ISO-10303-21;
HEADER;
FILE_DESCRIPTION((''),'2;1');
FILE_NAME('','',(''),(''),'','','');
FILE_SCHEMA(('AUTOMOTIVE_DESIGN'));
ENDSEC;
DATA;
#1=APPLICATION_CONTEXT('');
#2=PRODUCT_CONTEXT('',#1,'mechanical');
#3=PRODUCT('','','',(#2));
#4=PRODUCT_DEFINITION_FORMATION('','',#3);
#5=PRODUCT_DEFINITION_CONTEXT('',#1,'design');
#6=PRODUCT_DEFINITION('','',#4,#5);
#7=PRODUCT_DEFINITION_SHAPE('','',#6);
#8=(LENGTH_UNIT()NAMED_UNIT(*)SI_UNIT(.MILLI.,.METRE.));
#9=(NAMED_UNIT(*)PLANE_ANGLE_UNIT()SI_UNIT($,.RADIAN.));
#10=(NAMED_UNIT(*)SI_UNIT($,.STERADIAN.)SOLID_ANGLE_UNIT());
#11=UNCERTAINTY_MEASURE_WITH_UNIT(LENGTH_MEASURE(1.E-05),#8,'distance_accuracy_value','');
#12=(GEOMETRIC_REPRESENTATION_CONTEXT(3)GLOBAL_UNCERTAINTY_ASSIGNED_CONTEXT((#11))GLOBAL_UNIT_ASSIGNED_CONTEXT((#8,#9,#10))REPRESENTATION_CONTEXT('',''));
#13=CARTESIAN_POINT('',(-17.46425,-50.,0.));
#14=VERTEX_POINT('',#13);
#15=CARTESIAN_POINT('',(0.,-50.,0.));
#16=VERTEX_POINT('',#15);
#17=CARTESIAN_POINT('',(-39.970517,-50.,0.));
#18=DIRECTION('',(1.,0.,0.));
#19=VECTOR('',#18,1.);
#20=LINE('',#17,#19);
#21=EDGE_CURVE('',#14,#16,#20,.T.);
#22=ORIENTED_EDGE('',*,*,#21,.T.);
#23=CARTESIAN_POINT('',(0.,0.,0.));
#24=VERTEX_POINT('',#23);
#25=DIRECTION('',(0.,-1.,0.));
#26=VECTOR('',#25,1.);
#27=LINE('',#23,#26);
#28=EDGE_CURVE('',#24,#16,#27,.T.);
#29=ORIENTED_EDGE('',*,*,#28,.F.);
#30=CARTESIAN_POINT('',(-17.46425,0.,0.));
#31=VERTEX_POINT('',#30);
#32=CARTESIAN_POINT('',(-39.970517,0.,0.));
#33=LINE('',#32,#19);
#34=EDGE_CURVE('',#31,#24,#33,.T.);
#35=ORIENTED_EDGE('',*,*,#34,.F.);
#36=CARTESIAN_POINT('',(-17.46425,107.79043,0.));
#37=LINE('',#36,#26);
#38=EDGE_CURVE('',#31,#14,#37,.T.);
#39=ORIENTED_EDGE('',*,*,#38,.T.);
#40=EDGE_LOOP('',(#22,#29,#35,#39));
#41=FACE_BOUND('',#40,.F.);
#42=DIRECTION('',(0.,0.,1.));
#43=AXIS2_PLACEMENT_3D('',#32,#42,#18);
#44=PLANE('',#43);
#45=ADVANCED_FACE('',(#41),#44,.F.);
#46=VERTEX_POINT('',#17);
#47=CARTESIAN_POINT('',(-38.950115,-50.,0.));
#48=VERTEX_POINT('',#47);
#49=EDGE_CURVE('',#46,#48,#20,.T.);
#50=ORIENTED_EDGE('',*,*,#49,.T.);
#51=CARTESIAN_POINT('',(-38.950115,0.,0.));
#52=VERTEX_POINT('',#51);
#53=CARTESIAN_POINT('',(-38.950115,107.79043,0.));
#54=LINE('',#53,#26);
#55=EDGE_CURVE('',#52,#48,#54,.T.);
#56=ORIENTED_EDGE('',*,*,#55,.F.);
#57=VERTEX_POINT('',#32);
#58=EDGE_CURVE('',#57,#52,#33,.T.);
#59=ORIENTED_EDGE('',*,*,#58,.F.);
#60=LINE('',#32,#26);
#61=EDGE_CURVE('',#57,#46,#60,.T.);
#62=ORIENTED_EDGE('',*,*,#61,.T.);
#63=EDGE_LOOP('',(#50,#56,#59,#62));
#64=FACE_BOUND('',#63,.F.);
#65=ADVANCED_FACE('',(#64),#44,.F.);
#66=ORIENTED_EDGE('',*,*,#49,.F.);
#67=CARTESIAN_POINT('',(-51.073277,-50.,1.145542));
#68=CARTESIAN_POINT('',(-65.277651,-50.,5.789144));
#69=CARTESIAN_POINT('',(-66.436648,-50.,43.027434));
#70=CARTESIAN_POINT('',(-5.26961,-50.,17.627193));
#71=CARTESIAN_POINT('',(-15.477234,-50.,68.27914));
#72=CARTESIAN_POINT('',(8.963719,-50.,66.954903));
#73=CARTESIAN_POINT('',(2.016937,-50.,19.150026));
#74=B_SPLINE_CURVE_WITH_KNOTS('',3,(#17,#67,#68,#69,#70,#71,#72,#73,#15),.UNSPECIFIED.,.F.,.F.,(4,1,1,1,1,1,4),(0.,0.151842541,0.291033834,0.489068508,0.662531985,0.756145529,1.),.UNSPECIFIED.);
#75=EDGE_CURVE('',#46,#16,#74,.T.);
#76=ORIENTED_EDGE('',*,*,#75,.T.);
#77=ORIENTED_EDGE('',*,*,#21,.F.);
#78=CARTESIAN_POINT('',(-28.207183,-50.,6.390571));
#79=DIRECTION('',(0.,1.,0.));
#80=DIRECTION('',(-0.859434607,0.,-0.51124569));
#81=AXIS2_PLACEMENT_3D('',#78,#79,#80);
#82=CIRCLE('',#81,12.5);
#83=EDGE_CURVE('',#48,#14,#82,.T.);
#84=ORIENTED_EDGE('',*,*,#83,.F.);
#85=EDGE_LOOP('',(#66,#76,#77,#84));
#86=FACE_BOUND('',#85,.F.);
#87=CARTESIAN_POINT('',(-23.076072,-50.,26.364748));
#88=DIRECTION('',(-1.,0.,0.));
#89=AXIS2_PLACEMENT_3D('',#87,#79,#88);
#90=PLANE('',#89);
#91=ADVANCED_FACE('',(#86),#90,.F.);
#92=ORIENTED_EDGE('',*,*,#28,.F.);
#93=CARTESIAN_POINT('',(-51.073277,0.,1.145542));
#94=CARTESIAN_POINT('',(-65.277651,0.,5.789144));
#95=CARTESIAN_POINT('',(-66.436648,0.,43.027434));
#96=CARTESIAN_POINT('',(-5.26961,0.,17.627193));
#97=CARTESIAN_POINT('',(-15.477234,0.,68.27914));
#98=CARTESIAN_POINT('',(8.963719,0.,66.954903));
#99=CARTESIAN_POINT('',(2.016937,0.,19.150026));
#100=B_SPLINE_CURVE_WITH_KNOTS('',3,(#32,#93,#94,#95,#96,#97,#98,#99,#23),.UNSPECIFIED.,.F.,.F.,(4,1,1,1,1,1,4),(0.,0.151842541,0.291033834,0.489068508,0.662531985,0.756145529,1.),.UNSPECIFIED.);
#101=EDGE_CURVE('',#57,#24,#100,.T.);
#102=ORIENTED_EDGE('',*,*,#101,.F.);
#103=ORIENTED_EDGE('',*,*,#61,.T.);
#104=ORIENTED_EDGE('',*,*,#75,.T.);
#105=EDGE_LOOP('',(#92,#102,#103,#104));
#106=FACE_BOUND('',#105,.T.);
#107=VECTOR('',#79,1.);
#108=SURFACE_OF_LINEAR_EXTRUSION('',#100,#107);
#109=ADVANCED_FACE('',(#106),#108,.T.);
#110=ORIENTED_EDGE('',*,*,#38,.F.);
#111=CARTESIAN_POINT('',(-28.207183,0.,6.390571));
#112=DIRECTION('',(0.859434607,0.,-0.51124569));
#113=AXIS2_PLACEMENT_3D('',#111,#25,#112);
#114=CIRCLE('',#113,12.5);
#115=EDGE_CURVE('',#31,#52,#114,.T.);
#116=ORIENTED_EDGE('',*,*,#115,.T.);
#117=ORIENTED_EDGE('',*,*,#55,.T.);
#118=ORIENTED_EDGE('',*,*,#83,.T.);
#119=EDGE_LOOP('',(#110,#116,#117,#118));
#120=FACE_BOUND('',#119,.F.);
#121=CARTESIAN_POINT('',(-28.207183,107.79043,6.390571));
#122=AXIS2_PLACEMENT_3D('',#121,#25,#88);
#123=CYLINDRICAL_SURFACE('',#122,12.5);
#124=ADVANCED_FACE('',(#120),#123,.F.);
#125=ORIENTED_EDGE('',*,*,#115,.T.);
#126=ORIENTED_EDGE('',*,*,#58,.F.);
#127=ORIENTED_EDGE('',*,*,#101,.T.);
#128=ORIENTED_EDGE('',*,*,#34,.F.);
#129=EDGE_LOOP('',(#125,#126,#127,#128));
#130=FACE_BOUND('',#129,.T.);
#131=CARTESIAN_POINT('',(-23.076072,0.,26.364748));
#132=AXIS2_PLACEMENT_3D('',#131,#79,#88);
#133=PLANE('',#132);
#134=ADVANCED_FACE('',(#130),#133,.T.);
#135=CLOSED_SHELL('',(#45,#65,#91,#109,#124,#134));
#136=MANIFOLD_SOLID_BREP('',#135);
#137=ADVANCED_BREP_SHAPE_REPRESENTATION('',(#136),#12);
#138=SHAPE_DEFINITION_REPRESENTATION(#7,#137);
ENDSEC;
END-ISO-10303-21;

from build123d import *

# Parameters (mm, degrees)
F2_DEPTH = 50
F4_D     = 25


# Not quite as in the source:
# - a feature of the source that left no trace in its solid (it failed there, or was rolled back) is left out
# - the program builds the solid bodies; features that only make, move or delete a surface that nothing else refers to are left out


with BuildPart() as f2:
    # F1 (on Front) → F2 (new body)
    with BuildSketch(Plane.XZ):
        with BuildLine():
            add(Edge.make_bspline(
                [(-39.9705171585, 0), (-51.0732766987, 1.1455419157), (-65.2776511041, 5.7891437868), (-66.4366481756, 43.0274336767), (-5.2696100533, 17.6271931389), (-15.4772339938, 68.279140425), (8.9637191209, 66.9549032244), (2.0169374245, 19.1500262298), (0, 0)],
                knots=[0, 0, 0, 0, 0.1518425407, 0.2910338335, 0.489068508, 0.6625319848, 0.7561455289, 1, 1, 1, 1], degree=3))
            Line((-39.9705171585, 0), (0, 0))
        make_face()
    extrude(amount=F2_DEPTH)

    # F4 (through all)
    with Locations(Plane(origin=(0, 0, 0), x_dir=(1, 0, 0), z_dir=(0, 1, 0))):
        with Locations((-28.2071828842, -6.3905711286)):
            Hole(F4_D / 2)


solid = f2.part
